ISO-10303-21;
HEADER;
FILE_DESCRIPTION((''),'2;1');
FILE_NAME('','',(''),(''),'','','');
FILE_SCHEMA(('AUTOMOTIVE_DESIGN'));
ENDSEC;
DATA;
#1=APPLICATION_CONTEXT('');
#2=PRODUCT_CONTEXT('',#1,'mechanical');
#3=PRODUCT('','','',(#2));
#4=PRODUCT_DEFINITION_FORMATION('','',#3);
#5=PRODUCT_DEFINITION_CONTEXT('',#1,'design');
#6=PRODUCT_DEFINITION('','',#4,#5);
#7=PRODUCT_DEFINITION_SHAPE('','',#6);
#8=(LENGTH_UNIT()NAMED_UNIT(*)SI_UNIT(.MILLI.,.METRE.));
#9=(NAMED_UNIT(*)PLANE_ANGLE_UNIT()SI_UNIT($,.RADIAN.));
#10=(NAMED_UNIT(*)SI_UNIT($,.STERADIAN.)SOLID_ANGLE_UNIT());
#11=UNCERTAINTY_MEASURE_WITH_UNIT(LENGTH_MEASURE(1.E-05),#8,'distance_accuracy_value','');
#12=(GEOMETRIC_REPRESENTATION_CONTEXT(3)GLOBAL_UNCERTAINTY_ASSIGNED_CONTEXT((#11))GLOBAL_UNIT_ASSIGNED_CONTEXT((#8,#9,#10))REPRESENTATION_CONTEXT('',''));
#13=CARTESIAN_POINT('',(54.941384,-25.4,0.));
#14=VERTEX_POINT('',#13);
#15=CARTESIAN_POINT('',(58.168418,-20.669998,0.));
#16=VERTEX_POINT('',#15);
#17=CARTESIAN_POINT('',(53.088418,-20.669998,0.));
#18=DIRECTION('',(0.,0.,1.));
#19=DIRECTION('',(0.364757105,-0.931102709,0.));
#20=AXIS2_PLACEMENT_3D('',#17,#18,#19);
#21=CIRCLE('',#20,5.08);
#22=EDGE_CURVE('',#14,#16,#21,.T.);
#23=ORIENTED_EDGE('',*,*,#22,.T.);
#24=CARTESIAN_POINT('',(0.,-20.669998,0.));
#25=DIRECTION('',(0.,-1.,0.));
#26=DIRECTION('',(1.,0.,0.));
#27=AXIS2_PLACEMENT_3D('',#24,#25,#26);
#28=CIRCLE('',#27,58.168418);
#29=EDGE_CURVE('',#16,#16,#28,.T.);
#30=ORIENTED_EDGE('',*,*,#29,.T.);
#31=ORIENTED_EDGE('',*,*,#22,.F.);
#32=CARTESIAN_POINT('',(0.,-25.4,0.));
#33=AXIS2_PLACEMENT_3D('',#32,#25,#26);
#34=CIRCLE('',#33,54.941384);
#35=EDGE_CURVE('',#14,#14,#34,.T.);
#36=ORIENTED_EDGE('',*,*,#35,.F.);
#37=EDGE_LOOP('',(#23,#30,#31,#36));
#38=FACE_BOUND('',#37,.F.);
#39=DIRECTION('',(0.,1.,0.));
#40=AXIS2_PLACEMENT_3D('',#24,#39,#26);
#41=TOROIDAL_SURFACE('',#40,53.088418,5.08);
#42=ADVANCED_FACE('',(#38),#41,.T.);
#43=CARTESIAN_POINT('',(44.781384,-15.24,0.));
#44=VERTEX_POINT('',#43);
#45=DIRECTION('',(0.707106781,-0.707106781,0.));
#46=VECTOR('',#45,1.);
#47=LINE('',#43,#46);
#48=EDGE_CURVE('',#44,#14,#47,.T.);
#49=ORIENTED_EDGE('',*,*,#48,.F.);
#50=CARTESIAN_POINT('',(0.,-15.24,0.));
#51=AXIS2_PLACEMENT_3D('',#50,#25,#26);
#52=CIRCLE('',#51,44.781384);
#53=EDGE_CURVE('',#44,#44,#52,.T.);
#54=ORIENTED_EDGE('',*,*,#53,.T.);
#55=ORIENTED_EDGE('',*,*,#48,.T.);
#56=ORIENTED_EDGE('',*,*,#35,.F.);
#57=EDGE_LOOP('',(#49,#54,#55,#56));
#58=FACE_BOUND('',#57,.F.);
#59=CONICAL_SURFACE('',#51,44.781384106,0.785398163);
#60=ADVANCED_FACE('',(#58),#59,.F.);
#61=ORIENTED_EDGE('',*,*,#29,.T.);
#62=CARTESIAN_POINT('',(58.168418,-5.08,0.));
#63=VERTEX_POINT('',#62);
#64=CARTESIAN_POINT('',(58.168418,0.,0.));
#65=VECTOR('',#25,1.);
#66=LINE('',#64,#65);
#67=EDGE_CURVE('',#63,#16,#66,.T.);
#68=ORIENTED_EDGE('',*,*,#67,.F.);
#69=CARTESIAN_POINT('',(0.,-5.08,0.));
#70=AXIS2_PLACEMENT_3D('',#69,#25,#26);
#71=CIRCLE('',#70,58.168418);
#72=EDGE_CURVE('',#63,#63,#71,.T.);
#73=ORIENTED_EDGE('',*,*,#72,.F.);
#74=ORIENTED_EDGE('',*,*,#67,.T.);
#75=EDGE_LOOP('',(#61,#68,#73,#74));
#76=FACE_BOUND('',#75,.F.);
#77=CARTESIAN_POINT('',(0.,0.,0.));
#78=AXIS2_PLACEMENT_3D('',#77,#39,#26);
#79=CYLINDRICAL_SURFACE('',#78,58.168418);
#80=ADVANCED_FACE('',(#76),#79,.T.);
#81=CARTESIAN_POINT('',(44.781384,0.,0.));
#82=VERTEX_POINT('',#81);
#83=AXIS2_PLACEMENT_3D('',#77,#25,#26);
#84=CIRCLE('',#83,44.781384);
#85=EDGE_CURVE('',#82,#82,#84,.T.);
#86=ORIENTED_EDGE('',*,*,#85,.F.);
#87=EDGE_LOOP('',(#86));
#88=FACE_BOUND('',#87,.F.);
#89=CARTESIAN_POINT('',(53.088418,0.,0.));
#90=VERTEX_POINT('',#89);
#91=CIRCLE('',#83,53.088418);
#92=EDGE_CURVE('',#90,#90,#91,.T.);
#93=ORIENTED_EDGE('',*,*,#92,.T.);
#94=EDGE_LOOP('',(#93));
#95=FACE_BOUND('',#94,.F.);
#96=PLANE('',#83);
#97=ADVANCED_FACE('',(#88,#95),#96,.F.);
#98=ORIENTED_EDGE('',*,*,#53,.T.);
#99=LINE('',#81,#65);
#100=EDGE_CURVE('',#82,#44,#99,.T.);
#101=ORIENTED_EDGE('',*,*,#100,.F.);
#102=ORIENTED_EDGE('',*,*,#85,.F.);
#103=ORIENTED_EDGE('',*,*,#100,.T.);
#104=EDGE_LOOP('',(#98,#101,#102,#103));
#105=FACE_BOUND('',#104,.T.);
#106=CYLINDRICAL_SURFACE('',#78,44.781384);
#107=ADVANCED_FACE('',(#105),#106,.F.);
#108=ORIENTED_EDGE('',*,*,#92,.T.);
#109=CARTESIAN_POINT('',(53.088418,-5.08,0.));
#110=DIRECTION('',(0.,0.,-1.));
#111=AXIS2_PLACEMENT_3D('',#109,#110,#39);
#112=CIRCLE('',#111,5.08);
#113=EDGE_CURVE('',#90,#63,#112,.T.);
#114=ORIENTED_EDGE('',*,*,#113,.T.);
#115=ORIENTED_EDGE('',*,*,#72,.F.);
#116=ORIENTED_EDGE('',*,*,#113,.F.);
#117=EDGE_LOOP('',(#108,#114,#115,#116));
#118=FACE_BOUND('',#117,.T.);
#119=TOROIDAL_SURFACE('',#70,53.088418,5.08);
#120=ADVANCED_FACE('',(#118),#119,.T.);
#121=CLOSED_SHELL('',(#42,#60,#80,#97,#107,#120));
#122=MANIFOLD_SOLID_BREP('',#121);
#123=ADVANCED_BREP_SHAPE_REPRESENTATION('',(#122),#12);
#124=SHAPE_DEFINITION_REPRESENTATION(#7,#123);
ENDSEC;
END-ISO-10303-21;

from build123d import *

# Parameters (mm, degrees)
F0_R     = 58.1684180137
F0_R_2   = 44.7813841063
F1_DEPTH = 25.4
F2_SIZE  = 10.16


# Not quite as in the source:
# - a fillet or chamfer that OpenCascade refuses, or shapes differently, is made with other operations: its cross-section is extruded or revolved along the edge and cut away or added


with BuildPart() as f1:
    # F0 (on Front) → F1 (new body)
    with BuildSketch(Plane.XZ):
        Circle(F0_R)
        Circle(F0_R_2, mode=Mode.SUBTRACT)
    extrude(amount=F1_DEPTH)

    # F2
    f2_edges = [f1.edges().sort_by_distance(p)[0] for p in [
        (-44.781384, -25.4, 0),
    ]]
    chamfer(f2_edges, length=F2_SIZE)

    # F3: fillet of radius 5.08 on 2 edges, made by hand

    # F3_s1 → F3_t2 (revolve, cut)
    with BuildSketch(Plane.XY):
        with BuildLine():
            ThreePointArc((54.9413841063, -25.4), (57.2848133567, -23.5329802725), (58.1684180137, -20.669998239))
            Line((58.1684180137, -20.669998239), (58.1684180137, -25.4))
            Line((58.1684180137, -25.4), (54.9413841063, -25.4))
        make_face()
    revolve(axis=Axis((0, -25.4, 0), (0, -1, 0)), mode=Mode.SUBTRACT)

    # F3_s3 → F3_t4 (revolve, cut)
    with BuildSketch(Plane.XY):
        with BuildLine():
            ThreePointArc((53.0884180137, 0), (56.6805204621, -1.4878975516), (58.1684180137, -5.08))
            Line((58.1684180137, -5.08), (58.1684180137, 0))
            Line((58.1684180137, 0), (53.0884180137, 0))
        make_face()
    revolve(axis=Axis((0, 0, 0), (0, -1, 0)), mode=Mode.SUBTRACT)


solid = f1.part
